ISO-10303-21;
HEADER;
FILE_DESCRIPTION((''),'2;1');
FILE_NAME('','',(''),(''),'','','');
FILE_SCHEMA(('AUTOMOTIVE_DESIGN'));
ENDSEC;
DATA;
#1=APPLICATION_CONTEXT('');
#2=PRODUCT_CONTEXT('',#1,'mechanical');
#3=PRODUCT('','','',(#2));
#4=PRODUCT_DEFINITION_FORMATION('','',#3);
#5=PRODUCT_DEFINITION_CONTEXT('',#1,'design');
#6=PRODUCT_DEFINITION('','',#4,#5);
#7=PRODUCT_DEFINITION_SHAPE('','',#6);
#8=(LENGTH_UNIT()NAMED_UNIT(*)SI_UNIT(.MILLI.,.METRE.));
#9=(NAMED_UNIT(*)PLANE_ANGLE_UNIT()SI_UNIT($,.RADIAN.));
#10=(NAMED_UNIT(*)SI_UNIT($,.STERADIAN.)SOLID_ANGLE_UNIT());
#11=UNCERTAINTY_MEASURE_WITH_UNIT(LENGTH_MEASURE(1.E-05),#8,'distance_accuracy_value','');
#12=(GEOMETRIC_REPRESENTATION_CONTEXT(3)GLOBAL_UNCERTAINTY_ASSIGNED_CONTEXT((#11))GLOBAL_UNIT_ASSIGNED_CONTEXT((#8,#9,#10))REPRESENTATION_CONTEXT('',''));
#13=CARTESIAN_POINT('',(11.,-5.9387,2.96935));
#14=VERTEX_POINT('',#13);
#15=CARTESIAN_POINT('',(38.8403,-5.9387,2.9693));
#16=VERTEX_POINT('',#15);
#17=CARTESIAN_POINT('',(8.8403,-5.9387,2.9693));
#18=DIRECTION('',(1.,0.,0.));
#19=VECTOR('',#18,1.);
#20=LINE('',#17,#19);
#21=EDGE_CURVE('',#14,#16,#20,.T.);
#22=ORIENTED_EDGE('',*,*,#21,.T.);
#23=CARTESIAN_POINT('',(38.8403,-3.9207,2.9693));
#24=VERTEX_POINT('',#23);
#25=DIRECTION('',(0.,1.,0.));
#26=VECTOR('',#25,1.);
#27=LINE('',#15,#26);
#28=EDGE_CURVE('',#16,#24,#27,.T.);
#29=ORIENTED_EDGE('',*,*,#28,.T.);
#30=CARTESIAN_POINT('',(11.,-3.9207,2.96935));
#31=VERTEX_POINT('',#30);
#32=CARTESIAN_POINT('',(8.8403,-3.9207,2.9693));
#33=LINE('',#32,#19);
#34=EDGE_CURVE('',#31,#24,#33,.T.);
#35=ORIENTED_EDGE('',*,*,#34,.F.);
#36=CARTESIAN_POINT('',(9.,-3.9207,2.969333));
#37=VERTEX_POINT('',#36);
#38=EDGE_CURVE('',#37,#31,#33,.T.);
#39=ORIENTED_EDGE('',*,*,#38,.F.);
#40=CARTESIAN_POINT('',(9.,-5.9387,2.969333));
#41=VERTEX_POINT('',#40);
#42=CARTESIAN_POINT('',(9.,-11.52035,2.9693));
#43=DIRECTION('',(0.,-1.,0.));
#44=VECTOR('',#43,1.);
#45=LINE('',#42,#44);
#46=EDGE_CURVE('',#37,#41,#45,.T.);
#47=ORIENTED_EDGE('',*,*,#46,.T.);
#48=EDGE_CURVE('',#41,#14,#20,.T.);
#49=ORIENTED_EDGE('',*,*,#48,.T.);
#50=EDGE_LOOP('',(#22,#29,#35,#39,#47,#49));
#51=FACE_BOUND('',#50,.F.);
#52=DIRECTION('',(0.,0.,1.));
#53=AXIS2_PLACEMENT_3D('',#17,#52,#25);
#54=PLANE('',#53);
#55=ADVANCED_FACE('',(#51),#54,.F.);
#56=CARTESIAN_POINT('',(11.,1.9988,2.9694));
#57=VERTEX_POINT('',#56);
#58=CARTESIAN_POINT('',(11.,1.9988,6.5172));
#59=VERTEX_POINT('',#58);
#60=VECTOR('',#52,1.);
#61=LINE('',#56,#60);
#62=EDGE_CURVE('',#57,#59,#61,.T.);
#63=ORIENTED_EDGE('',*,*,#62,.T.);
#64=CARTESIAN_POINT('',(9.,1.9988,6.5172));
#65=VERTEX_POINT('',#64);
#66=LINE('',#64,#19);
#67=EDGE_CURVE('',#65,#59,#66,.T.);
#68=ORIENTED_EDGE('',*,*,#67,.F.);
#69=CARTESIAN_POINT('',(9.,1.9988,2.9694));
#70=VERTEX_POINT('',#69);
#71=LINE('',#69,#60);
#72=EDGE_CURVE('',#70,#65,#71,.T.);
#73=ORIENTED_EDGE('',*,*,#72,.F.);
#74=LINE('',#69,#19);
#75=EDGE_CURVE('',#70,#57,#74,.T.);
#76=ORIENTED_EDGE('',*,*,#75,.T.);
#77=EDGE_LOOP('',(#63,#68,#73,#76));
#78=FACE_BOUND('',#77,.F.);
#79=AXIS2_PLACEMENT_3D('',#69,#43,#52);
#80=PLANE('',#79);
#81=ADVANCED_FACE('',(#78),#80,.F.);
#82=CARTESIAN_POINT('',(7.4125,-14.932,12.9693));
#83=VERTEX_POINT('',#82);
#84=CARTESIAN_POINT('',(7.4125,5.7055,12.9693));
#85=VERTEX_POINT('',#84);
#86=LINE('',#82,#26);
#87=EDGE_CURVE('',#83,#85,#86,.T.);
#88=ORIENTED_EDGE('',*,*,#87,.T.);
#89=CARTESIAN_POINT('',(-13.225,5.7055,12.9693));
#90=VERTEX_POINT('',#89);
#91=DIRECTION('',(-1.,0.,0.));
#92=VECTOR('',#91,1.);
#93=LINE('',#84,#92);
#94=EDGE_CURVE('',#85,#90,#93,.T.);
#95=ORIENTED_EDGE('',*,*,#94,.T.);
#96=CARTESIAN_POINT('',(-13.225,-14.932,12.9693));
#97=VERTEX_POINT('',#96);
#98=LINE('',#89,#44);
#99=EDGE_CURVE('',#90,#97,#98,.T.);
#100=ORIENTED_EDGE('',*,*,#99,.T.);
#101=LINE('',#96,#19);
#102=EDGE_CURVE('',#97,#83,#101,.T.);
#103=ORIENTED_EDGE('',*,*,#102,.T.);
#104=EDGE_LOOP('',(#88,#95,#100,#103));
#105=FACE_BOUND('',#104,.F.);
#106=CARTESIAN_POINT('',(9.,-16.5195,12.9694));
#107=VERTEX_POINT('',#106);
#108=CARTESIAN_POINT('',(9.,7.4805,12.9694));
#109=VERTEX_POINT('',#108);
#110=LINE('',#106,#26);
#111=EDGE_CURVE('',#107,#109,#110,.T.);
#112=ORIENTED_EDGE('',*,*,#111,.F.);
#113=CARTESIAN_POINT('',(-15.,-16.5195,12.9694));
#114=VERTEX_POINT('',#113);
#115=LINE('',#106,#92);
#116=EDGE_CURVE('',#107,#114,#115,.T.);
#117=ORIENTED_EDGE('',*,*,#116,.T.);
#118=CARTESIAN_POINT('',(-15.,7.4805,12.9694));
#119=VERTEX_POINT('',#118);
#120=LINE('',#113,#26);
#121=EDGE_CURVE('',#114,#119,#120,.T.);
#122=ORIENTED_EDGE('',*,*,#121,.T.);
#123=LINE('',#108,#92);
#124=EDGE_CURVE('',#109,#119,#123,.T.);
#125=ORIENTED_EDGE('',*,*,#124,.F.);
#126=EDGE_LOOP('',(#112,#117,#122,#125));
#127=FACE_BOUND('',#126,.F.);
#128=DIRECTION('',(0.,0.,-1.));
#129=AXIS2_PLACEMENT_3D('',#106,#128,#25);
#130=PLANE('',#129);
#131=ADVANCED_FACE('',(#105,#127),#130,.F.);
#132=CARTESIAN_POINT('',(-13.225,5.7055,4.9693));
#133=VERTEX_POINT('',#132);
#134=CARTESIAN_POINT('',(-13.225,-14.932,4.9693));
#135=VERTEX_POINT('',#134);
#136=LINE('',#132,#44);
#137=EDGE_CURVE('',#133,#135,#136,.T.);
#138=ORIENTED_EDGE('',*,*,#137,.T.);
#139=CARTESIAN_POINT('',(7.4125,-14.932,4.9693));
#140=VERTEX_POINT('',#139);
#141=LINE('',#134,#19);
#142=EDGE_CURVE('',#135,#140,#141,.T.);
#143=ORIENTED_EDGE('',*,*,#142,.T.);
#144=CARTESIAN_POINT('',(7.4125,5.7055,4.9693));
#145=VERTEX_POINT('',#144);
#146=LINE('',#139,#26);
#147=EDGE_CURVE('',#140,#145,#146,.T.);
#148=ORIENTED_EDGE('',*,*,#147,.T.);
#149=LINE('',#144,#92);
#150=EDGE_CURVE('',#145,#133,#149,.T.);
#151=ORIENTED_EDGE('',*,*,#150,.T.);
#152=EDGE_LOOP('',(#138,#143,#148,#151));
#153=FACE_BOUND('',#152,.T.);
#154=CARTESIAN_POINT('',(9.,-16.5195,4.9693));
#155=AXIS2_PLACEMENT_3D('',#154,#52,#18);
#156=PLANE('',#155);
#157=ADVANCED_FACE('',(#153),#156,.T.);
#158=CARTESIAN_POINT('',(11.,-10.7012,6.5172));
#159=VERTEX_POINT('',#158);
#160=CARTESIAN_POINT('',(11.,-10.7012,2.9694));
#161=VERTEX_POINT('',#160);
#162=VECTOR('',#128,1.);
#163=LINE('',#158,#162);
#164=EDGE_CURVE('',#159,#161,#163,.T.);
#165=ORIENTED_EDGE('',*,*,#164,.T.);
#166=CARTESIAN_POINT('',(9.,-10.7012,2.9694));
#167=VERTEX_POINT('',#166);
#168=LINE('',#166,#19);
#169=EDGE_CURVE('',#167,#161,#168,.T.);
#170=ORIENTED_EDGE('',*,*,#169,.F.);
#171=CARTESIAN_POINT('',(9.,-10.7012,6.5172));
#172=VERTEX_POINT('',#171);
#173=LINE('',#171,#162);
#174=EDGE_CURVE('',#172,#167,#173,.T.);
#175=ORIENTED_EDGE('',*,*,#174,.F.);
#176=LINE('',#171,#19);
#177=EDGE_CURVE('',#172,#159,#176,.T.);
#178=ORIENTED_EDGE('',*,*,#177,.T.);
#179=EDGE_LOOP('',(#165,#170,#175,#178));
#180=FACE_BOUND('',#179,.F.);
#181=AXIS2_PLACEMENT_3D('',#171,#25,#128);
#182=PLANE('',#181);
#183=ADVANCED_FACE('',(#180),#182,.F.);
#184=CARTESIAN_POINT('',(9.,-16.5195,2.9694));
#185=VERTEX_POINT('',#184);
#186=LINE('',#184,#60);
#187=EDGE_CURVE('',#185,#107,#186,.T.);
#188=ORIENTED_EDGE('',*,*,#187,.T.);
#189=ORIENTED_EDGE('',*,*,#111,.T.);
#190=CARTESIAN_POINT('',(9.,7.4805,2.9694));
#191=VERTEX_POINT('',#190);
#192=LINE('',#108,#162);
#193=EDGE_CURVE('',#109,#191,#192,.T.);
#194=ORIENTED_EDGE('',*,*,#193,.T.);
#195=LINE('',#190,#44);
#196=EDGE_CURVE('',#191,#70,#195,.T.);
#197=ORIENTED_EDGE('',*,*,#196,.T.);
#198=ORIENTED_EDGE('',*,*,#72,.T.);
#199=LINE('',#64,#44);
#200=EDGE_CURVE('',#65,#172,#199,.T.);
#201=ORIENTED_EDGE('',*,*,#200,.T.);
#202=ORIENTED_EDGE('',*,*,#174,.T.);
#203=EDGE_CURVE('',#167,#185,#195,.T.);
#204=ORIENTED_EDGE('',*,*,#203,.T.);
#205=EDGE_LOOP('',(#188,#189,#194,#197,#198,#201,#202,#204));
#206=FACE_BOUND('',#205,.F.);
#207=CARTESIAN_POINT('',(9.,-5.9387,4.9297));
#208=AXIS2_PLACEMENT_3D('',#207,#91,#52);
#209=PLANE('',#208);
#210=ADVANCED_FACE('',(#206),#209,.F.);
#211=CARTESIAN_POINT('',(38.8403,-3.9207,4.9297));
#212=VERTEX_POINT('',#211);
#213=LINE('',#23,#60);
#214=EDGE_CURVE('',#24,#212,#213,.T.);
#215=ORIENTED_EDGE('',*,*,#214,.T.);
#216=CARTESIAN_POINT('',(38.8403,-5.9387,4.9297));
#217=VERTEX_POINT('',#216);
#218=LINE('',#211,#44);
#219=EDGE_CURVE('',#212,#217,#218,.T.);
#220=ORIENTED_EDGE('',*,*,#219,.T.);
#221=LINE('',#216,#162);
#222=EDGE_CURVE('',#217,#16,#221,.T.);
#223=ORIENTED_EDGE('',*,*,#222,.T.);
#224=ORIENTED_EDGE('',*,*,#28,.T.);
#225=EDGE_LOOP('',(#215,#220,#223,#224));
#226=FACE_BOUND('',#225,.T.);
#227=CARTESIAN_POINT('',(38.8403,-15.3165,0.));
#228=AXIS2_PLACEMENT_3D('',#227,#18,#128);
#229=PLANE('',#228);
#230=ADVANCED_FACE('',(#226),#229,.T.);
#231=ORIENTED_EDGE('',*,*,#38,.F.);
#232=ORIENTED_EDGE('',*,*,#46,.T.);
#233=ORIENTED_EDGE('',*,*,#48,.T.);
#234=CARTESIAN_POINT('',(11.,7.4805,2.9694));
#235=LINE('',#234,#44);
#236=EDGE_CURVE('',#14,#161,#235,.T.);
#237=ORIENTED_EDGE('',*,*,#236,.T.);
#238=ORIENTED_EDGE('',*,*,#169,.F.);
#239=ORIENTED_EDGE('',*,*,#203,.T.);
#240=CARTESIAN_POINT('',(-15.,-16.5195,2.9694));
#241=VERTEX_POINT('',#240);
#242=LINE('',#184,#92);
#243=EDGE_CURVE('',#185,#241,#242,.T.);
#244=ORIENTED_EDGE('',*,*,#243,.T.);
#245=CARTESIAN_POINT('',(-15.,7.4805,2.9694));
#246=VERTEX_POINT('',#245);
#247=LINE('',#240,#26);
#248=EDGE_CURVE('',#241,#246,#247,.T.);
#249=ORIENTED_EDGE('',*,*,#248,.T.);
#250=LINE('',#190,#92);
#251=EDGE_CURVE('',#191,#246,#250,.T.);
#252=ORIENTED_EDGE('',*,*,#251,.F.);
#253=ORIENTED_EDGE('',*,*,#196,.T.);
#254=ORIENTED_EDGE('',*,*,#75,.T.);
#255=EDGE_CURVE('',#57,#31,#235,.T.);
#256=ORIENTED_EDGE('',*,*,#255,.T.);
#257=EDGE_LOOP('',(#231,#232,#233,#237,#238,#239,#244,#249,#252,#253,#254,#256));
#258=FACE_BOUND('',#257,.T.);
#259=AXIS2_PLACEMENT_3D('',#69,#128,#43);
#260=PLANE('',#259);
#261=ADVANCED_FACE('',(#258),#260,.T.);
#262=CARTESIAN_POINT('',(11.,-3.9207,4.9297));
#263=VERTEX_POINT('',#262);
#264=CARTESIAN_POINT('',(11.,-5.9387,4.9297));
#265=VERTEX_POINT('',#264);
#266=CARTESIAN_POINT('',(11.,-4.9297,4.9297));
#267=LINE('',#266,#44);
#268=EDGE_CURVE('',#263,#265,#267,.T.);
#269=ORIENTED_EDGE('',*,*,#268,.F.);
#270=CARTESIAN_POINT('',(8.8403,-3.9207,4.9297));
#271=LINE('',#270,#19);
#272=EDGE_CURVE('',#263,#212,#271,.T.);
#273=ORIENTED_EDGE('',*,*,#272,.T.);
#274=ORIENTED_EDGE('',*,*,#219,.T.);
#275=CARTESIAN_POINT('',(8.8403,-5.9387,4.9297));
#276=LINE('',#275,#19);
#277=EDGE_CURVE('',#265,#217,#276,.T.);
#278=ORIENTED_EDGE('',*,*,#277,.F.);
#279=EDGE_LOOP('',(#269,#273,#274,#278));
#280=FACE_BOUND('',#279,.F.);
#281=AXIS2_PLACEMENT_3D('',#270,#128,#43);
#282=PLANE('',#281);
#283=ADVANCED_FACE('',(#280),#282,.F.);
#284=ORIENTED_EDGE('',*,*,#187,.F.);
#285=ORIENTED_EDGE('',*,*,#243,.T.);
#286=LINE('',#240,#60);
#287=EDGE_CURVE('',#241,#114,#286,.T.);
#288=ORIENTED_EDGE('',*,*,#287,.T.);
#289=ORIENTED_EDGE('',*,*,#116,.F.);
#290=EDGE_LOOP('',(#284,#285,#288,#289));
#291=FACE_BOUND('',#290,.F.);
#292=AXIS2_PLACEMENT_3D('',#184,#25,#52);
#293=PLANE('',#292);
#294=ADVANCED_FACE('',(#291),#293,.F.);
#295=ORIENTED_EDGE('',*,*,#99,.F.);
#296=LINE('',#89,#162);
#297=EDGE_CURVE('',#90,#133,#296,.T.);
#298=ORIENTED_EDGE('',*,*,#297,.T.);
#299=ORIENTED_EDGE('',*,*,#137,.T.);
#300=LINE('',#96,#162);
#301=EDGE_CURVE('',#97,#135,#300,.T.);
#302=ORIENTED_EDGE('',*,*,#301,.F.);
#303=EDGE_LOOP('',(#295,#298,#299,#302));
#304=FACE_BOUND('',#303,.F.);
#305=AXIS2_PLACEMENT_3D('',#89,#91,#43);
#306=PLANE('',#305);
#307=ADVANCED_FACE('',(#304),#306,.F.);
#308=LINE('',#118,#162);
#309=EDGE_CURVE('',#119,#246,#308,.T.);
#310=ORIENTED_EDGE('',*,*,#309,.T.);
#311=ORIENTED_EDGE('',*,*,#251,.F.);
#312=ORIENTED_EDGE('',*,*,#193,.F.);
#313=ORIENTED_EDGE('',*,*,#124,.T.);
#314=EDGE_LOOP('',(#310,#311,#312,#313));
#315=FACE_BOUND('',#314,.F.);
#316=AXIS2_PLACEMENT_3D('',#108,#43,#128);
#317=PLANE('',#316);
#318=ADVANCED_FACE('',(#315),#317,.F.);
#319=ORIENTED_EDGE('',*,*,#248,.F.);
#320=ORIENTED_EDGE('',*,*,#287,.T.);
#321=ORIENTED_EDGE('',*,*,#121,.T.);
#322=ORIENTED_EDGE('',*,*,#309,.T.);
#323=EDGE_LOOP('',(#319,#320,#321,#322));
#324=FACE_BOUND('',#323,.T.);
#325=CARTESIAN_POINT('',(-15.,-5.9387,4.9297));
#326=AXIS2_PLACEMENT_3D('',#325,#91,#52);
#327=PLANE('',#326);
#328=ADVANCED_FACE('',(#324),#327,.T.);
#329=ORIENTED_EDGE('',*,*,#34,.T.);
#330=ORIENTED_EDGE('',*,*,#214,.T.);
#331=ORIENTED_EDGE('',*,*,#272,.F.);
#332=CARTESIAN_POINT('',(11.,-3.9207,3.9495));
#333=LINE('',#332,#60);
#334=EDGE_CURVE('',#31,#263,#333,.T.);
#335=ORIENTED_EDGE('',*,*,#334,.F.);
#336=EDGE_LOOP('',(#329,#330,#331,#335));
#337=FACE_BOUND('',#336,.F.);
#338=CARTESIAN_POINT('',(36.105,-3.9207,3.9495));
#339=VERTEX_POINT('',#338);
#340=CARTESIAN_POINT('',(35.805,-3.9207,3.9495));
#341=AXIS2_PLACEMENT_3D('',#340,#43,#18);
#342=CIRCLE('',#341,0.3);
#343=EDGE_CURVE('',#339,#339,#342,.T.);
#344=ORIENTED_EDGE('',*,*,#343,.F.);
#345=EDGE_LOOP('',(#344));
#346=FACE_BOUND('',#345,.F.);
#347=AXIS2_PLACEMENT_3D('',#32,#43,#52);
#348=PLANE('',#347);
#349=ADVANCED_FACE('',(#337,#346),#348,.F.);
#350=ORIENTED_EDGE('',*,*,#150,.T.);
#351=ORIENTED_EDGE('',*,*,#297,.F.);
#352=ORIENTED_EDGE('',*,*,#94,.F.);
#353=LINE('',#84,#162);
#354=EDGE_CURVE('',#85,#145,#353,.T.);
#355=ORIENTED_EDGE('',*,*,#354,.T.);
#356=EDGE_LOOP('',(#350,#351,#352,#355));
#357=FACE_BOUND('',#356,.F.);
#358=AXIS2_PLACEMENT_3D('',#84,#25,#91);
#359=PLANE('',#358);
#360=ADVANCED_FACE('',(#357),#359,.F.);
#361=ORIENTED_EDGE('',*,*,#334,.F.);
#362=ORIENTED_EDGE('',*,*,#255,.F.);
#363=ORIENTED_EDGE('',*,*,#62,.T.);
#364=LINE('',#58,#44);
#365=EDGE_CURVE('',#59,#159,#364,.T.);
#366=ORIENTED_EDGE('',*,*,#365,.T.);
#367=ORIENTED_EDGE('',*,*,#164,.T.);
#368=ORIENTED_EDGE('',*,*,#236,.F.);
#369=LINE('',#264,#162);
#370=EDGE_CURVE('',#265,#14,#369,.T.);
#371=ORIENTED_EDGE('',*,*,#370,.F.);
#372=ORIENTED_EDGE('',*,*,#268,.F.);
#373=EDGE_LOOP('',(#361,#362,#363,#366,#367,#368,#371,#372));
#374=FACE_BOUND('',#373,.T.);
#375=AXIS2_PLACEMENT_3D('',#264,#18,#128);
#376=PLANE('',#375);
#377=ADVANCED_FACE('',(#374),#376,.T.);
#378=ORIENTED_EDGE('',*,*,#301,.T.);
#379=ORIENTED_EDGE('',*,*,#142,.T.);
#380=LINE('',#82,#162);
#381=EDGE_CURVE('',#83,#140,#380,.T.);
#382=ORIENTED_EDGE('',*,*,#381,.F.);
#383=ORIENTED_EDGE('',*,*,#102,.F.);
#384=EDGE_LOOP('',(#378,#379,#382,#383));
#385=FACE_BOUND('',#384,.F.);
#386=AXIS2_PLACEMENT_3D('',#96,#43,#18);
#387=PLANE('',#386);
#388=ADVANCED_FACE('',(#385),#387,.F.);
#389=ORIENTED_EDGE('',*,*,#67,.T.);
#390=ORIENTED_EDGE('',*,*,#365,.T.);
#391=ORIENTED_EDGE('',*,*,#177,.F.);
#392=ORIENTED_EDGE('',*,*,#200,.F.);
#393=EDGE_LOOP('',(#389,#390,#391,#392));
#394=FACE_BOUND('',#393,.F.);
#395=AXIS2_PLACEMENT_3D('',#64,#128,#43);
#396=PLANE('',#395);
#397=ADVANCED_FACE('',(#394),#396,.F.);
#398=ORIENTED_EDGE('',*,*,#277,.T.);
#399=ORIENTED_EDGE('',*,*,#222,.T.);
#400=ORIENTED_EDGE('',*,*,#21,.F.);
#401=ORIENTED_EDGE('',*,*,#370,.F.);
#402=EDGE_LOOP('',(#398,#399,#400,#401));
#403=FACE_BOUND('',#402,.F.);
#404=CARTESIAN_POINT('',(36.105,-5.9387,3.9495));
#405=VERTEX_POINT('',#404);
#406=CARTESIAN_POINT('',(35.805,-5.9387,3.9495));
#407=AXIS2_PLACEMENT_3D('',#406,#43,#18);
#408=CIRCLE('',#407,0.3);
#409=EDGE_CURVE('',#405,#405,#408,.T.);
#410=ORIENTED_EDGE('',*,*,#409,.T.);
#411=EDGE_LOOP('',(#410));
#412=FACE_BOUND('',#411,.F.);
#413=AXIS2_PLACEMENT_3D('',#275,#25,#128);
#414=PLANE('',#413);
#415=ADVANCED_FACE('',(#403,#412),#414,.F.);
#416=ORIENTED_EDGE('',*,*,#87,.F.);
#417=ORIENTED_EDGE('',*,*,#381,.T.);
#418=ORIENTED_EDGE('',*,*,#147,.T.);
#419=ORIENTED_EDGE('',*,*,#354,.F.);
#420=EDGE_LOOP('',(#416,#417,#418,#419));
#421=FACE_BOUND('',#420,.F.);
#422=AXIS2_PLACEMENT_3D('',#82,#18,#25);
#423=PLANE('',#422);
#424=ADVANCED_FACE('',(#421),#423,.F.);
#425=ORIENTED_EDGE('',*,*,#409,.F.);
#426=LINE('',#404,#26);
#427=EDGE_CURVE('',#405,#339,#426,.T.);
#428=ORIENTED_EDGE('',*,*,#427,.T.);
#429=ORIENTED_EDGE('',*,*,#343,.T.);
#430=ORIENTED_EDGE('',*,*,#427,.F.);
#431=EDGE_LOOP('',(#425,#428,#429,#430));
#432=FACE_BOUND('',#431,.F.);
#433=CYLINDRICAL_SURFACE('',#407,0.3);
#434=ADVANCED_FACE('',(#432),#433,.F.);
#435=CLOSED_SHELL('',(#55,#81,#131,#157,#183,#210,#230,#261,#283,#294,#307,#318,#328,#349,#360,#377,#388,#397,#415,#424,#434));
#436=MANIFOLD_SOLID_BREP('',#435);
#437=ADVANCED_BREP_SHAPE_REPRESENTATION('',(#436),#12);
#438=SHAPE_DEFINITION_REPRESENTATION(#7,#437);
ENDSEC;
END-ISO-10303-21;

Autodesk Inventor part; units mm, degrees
ref_plane "YZ Plane" through (0, 0, 0) normal (1, 0, 0) x (0, 1, 0)
ref_plane "XZ Plane" through (0, 0, 0) normal (0, 1, 0) x (-1, 0, 0)
ref_plane "XY Plane" through (0, 0, 0) normal (0, 0, 1) x (1, 0, 0)
sketch "Sketch5" plane through (0, 0, 0) normal (0, 0, 1) x (1, 0, 0)
  line L0 (-11.1597, 4.6835) -> (8.8403, 4.6835)
  line L1 (8.8403, 4.6835) -> (8.8403, -15.3165)
  line L2 (8.8403, -15.3165) -> (-11.1597, -15.3165)
  line L3 (-11.1597, -15.3165) -> (-11.1597, 4.6835)
  point P0 (0, 0)
  dimension "d13" = 20
  dimension "d14" = 20
extrude "Extrusion5" add sketch "Sketch5" along normal blind 8
sketch "Sketch6" plane through (0, 0, 8) normal (0, 0, 1) x (1, 0, 0)
  line L0 (-10.6667, 4.1905) -> (8.3333, 4.1905)
  line L1 (8.3333, 4.1905) -> (8.3333, -14.8095)
  line L2 (8.3333, -14.8095) -> (-10.6667, -14.8095)
  line L3 (-10.6667, -14.8095) -> (-10.6667, 4.1905)
  point P0 (0, 0)
  dimension "d17" = 19
  dimension "d18" = 19
extrude "Extrusion6" cut sketch "Sketch6" against normal blind 7
sketch "Sketch11" plane through (8.8403, -15.3165, 0) normal (1, 0, 0) x (0, 0, -1)
  line L0 (-4.9297, 9.3778) -> (-2.9693, 9.3778)
  line L1 (-2.9693, 9.3778) -> (-2.9693, 11.3958)
  line L2 (-2.9693, 11.3958) -> (-4.9297, 11.3958)
  line L3 (-4.9297, 11.3958) -> (-4.9297, 9.3778)
  point P0 (0, 15.3165)
extrude "Extrusion11" add sketch "Sketch11" along normal blind 30
sketch "Sketch12" plane through (8.8403, -5.9387, 2.9693) normal (0, -1, 0) x (1, 0, 0)
  circle A0 centre (26.9647, 0.9802) radius 0.3
  point P0 (-8.8403, -2.9693)
  dimension "d35" = 0.6
extrude "Extrusion12" cut sketch "Sketch12" against normal blind 30
sketch "Sketch13" plane through (0, 0, 0) normal (0, 0, -1) x (-1, 0, 0)
  line L0 (-9, 6.898) -> (15, 6.898)
  line L1 (15, 6.898) -> (15, -17.102)
  line L2 (15, -17.102) -> (-9, -17.102)
  line L3 (-9, -17.102) -> (-9, 6.898)
  point P0 (0, 0)
  dimension "d38" = 24
  dimension "d39" = 24
extrude "Extrusion13" cut sketch "Sketch13" against normal blind 10
sketch "Sketch14" plane through (9, -5.9387, 4.9297) normal (-1, 0, 0) x (0, 0, 1)
  line L0 (-1.9603, 0) -> (-1.9603, 2.018) projected
  line L1 (-1.9603, -10.5808) -> (8.0397, -10.5808)
  line L2 (8.0397, -10.5808) -> (8.0397, 13.4192)
  line L3 (8.0397, 13.4192) -> (-1.9603, 13.4192)
  line L4 (-1.9603, 13.4192) -> (-1.9603, -10.5808)
  point P0 (-4.9297, 5.9387)
  dimension "d42" = 10
  dimension "d43" = 24
extrude "Extrusion14" add sketch "Sketch14" along normal blind 24
sketch "Sketch15" plane through (9, -16.5195, 12.9693) normal (0, 0, 1) x (1, 0, 0)
  line L0 (-1.5875, 22.225) -> (-22.225, 22.225)
  line L1 (-22.225, 22.225) -> (-22.225, 1.5875)
  line L2 (-22.225, 1.5875) -> (-1.5875, 1.5875)
  line L3 (-1.5875, 1.5875) -> (-1.5875, 22.225)
  point P0 (-9, 16.5195)
extrude "Extrusion15" cut sketch "Sketch15" against normal blind 8
sketch "Sketch16" plane through (9, -5.9387, 4.9297) normal (1, 0, 0) x (0, 0, -1)
  line L0 (1.9603, 13.4192) -> (1.9603, -10.5808) projected
  line L1 (1.9603, 7.9375) -> (-1.5875, 7.9375)
  line L2 (-1.5875, 7.9375) -> (-1.5875, -4.7625)
  line L3 (-1.5875, -4.7625) -> (1.9603, -4.7625)
  line L4 (1.9603, -4.7625) -> (1.9603, 7.9375)
  point P0 (4.9297, 5.9387)
  point P1 (1.9603, -4.7625)
extrude "Extrusion16" add sketch "Sketch16" along normal blind 2
properties part number "pusher"
